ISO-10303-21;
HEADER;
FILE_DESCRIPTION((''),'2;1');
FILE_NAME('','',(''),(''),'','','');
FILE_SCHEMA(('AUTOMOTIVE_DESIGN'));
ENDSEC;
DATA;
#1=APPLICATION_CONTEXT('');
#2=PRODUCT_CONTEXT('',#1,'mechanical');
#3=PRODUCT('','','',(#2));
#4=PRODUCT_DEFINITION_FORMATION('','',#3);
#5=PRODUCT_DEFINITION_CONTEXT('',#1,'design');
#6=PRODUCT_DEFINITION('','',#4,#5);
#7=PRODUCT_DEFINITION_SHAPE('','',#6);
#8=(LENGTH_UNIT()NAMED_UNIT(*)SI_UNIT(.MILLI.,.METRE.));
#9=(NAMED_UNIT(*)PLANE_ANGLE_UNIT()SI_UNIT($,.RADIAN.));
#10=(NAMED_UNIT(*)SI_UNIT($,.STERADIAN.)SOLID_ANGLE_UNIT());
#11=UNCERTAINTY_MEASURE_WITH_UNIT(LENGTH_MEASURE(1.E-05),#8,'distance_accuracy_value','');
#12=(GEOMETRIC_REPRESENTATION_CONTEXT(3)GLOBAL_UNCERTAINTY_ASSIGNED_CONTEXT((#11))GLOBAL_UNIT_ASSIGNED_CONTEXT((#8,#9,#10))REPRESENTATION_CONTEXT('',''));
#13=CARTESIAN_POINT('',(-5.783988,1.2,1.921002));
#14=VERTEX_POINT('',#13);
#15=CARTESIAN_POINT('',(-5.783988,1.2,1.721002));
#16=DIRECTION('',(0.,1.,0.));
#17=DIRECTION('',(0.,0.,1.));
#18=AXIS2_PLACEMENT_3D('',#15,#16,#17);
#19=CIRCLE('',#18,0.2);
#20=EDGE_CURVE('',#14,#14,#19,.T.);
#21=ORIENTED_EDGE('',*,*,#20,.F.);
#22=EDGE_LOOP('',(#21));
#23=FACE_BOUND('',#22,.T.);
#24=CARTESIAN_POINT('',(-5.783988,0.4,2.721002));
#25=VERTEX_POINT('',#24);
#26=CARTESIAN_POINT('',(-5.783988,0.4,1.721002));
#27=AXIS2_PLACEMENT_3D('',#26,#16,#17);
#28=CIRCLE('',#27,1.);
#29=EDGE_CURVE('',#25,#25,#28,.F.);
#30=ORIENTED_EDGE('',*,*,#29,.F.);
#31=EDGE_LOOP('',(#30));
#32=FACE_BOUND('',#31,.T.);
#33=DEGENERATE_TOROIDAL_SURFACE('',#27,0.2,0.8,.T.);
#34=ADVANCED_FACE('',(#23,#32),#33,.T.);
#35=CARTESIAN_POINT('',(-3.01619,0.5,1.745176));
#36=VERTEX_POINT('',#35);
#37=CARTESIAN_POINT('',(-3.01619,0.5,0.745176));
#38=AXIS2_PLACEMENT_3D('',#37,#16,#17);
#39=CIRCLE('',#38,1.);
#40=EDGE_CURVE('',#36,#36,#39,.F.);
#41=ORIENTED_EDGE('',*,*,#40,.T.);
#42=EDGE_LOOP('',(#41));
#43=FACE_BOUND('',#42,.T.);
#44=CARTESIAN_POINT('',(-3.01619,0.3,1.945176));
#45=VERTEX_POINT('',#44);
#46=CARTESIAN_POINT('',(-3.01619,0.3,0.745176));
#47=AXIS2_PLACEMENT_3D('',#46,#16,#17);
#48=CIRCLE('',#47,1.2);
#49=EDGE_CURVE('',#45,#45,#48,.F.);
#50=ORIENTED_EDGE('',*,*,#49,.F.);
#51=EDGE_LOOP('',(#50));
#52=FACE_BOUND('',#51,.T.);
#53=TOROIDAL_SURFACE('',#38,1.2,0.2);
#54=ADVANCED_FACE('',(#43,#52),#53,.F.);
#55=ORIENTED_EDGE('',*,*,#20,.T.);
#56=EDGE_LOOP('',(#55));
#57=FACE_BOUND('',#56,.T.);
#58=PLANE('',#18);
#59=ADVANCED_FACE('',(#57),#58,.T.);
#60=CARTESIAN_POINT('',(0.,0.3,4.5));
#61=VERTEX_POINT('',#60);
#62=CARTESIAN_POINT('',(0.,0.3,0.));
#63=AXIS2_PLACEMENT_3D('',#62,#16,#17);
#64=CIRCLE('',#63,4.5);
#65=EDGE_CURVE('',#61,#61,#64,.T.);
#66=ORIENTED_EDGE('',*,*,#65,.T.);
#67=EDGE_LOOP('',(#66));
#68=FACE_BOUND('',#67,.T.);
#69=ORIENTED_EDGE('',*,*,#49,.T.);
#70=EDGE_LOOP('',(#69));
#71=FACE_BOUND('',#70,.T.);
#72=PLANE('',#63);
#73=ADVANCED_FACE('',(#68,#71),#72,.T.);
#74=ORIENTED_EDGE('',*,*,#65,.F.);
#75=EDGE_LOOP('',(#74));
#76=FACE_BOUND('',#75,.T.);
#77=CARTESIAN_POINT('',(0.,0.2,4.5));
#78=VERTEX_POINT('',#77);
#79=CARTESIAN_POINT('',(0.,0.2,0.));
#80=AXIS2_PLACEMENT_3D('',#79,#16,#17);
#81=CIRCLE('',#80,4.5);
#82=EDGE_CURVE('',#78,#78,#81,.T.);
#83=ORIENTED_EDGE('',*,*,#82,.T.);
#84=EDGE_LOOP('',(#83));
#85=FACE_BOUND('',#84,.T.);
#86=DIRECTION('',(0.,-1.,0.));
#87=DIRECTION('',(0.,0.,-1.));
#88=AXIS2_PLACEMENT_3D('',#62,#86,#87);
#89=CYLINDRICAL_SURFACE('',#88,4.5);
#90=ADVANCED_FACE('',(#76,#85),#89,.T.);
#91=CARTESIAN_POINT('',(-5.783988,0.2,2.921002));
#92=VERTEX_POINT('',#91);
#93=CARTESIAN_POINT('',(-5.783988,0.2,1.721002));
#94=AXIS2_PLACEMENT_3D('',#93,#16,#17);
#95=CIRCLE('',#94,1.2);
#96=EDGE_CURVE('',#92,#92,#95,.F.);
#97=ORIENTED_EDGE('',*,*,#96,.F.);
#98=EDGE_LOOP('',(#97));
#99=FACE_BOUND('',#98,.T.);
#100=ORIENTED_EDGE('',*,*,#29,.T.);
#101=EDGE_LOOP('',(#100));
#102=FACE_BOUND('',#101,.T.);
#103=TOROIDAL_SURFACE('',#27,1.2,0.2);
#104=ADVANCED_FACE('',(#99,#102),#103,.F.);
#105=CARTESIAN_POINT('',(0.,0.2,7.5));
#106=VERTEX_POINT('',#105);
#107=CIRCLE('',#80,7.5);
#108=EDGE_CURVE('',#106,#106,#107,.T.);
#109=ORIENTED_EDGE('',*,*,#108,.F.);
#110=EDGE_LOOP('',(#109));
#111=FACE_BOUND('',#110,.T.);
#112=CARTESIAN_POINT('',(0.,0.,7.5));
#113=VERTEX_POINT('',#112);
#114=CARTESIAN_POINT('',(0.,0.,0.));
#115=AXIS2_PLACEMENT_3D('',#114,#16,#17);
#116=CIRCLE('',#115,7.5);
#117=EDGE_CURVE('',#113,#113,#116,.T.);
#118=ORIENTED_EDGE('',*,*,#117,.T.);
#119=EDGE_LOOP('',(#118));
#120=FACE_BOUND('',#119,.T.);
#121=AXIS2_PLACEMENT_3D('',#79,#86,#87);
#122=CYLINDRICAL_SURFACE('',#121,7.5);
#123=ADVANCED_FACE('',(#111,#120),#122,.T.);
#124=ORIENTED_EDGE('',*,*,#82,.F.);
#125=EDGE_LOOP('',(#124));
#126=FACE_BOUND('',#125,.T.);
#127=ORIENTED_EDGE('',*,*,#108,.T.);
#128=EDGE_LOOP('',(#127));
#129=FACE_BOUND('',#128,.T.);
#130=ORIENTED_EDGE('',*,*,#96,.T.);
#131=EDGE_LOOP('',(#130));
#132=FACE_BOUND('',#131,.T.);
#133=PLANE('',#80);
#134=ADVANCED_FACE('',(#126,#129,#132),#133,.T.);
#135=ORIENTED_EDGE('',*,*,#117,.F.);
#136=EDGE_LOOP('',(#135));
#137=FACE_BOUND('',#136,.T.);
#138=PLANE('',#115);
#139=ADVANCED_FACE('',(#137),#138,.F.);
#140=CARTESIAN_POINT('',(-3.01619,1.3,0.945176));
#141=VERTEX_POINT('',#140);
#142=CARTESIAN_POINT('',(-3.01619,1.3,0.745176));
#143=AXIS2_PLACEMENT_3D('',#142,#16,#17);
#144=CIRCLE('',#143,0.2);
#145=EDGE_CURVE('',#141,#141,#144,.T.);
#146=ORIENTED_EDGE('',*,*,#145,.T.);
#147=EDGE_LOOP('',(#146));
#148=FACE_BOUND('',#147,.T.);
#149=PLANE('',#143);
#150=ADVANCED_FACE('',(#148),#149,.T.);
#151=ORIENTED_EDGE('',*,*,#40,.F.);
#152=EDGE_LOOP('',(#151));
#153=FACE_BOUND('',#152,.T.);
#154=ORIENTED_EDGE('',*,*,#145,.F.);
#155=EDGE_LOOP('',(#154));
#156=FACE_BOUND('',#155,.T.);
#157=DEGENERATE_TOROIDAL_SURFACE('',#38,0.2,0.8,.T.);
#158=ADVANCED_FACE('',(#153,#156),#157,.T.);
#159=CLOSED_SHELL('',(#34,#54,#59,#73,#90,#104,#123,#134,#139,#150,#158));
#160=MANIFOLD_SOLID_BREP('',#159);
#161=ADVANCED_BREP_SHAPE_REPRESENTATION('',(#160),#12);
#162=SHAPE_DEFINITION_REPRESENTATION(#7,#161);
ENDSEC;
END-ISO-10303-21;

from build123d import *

# Parameters (mm, degrees)
SKETCH_1_R      = 7.5
EXTRUDE_1_DEPTH = 0.2
SKETCH_2_R      = 4.5
EXTRUDE_2_DEPTH = 0.1
SKETCH_3_R      = 1
EXTRUDE_3_DEPTH = 1
FILLET_1_R      = 0.8
SKETCH_4_R      = 1
EXTRUDE_4_DEPTH = 1
FILLET_2_R      = 0.8
FILLET_3_R      = 0.2


with BuildPart() as part:
    # 草图1 → 凸台-拉伸1 (new body)
    with BuildSketch(Plane(origin=(0, 0, 0), x_dir=(1, 0, 0), z_dir=(0, 1, 0))):
        with Locations(Location((0, 0, 0), (0, 0, 270))):
            Circle(SKETCH_1_R)
    extrude(amount=EXTRUDE_1_DEPTH)

    # 草图2 → 凸台-拉伸2 (add)
    with BuildSketch(Plane(origin=(0, 0.2, 0), x_dir=(1, 0, 0), z_dir=(0, 1, 0))):
        with Locations(Location((0, 0, 0), (0, 0, 270))):
            Circle(SKETCH_2_R)
    extrude(amount=EXTRUDE_2_DEPTH)

    # 草图3 → 凸台-拉伸3 (add)
    with BuildSketch(Plane(origin=(0, 0.2, 0), x_dir=(1, 0, 0), z_dir=(0, 1, 0))):
        with Locations(Location((-5.78398758, -1.72100244, 0), (0, 0, 270))):
            Circle(SKETCH_3_R)
    extrude(amount=EXTRUDE_3_DEPTH)

    # 圆角1
    fillet_1_edges = [part.edges().sort_by_distance(p)[0] for p in [
        (-5.78398758, 1.2, 0.72100244),
    ]]
    fillet(fillet_1_edges, radius=FILLET_1_R)

    # 草图4 → 凸台-拉伸4 (add)
    with BuildSketch(Plane(origin=(0, 0.3, 0), x_dir=(1, 0, 0), z_dir=(0, 1, 0))):
        with Locations(Location((-3.016189843, -0.745176314, 0), (0, 0, 270))):
            Circle(SKETCH_4_R)
    extrude(amount=EXTRUDE_4_DEPTH)

    # 圆角2
    fillet_2_edges = [part.edges().sort_by_distance(p)[0] for p in [
        (-3.016189843, 1.3, -0.254823686),
    ]]
    fillet(fillet_2_edges, radius=FILLET_2_R)

    # 圆角3
    fillet_3_edges = [part.edges().sort_by_distance(p)[0] for p in [
        (-5.78398758, 0.2, 0.72100244),
        (-3.016189843, 0.3, -0.254823686),
    ]]
    fillet(fillet_3_edges, radius=FILLET_3_R - 0.0001)  # a hair under: the kernel refuses the full size


solid = part.part
